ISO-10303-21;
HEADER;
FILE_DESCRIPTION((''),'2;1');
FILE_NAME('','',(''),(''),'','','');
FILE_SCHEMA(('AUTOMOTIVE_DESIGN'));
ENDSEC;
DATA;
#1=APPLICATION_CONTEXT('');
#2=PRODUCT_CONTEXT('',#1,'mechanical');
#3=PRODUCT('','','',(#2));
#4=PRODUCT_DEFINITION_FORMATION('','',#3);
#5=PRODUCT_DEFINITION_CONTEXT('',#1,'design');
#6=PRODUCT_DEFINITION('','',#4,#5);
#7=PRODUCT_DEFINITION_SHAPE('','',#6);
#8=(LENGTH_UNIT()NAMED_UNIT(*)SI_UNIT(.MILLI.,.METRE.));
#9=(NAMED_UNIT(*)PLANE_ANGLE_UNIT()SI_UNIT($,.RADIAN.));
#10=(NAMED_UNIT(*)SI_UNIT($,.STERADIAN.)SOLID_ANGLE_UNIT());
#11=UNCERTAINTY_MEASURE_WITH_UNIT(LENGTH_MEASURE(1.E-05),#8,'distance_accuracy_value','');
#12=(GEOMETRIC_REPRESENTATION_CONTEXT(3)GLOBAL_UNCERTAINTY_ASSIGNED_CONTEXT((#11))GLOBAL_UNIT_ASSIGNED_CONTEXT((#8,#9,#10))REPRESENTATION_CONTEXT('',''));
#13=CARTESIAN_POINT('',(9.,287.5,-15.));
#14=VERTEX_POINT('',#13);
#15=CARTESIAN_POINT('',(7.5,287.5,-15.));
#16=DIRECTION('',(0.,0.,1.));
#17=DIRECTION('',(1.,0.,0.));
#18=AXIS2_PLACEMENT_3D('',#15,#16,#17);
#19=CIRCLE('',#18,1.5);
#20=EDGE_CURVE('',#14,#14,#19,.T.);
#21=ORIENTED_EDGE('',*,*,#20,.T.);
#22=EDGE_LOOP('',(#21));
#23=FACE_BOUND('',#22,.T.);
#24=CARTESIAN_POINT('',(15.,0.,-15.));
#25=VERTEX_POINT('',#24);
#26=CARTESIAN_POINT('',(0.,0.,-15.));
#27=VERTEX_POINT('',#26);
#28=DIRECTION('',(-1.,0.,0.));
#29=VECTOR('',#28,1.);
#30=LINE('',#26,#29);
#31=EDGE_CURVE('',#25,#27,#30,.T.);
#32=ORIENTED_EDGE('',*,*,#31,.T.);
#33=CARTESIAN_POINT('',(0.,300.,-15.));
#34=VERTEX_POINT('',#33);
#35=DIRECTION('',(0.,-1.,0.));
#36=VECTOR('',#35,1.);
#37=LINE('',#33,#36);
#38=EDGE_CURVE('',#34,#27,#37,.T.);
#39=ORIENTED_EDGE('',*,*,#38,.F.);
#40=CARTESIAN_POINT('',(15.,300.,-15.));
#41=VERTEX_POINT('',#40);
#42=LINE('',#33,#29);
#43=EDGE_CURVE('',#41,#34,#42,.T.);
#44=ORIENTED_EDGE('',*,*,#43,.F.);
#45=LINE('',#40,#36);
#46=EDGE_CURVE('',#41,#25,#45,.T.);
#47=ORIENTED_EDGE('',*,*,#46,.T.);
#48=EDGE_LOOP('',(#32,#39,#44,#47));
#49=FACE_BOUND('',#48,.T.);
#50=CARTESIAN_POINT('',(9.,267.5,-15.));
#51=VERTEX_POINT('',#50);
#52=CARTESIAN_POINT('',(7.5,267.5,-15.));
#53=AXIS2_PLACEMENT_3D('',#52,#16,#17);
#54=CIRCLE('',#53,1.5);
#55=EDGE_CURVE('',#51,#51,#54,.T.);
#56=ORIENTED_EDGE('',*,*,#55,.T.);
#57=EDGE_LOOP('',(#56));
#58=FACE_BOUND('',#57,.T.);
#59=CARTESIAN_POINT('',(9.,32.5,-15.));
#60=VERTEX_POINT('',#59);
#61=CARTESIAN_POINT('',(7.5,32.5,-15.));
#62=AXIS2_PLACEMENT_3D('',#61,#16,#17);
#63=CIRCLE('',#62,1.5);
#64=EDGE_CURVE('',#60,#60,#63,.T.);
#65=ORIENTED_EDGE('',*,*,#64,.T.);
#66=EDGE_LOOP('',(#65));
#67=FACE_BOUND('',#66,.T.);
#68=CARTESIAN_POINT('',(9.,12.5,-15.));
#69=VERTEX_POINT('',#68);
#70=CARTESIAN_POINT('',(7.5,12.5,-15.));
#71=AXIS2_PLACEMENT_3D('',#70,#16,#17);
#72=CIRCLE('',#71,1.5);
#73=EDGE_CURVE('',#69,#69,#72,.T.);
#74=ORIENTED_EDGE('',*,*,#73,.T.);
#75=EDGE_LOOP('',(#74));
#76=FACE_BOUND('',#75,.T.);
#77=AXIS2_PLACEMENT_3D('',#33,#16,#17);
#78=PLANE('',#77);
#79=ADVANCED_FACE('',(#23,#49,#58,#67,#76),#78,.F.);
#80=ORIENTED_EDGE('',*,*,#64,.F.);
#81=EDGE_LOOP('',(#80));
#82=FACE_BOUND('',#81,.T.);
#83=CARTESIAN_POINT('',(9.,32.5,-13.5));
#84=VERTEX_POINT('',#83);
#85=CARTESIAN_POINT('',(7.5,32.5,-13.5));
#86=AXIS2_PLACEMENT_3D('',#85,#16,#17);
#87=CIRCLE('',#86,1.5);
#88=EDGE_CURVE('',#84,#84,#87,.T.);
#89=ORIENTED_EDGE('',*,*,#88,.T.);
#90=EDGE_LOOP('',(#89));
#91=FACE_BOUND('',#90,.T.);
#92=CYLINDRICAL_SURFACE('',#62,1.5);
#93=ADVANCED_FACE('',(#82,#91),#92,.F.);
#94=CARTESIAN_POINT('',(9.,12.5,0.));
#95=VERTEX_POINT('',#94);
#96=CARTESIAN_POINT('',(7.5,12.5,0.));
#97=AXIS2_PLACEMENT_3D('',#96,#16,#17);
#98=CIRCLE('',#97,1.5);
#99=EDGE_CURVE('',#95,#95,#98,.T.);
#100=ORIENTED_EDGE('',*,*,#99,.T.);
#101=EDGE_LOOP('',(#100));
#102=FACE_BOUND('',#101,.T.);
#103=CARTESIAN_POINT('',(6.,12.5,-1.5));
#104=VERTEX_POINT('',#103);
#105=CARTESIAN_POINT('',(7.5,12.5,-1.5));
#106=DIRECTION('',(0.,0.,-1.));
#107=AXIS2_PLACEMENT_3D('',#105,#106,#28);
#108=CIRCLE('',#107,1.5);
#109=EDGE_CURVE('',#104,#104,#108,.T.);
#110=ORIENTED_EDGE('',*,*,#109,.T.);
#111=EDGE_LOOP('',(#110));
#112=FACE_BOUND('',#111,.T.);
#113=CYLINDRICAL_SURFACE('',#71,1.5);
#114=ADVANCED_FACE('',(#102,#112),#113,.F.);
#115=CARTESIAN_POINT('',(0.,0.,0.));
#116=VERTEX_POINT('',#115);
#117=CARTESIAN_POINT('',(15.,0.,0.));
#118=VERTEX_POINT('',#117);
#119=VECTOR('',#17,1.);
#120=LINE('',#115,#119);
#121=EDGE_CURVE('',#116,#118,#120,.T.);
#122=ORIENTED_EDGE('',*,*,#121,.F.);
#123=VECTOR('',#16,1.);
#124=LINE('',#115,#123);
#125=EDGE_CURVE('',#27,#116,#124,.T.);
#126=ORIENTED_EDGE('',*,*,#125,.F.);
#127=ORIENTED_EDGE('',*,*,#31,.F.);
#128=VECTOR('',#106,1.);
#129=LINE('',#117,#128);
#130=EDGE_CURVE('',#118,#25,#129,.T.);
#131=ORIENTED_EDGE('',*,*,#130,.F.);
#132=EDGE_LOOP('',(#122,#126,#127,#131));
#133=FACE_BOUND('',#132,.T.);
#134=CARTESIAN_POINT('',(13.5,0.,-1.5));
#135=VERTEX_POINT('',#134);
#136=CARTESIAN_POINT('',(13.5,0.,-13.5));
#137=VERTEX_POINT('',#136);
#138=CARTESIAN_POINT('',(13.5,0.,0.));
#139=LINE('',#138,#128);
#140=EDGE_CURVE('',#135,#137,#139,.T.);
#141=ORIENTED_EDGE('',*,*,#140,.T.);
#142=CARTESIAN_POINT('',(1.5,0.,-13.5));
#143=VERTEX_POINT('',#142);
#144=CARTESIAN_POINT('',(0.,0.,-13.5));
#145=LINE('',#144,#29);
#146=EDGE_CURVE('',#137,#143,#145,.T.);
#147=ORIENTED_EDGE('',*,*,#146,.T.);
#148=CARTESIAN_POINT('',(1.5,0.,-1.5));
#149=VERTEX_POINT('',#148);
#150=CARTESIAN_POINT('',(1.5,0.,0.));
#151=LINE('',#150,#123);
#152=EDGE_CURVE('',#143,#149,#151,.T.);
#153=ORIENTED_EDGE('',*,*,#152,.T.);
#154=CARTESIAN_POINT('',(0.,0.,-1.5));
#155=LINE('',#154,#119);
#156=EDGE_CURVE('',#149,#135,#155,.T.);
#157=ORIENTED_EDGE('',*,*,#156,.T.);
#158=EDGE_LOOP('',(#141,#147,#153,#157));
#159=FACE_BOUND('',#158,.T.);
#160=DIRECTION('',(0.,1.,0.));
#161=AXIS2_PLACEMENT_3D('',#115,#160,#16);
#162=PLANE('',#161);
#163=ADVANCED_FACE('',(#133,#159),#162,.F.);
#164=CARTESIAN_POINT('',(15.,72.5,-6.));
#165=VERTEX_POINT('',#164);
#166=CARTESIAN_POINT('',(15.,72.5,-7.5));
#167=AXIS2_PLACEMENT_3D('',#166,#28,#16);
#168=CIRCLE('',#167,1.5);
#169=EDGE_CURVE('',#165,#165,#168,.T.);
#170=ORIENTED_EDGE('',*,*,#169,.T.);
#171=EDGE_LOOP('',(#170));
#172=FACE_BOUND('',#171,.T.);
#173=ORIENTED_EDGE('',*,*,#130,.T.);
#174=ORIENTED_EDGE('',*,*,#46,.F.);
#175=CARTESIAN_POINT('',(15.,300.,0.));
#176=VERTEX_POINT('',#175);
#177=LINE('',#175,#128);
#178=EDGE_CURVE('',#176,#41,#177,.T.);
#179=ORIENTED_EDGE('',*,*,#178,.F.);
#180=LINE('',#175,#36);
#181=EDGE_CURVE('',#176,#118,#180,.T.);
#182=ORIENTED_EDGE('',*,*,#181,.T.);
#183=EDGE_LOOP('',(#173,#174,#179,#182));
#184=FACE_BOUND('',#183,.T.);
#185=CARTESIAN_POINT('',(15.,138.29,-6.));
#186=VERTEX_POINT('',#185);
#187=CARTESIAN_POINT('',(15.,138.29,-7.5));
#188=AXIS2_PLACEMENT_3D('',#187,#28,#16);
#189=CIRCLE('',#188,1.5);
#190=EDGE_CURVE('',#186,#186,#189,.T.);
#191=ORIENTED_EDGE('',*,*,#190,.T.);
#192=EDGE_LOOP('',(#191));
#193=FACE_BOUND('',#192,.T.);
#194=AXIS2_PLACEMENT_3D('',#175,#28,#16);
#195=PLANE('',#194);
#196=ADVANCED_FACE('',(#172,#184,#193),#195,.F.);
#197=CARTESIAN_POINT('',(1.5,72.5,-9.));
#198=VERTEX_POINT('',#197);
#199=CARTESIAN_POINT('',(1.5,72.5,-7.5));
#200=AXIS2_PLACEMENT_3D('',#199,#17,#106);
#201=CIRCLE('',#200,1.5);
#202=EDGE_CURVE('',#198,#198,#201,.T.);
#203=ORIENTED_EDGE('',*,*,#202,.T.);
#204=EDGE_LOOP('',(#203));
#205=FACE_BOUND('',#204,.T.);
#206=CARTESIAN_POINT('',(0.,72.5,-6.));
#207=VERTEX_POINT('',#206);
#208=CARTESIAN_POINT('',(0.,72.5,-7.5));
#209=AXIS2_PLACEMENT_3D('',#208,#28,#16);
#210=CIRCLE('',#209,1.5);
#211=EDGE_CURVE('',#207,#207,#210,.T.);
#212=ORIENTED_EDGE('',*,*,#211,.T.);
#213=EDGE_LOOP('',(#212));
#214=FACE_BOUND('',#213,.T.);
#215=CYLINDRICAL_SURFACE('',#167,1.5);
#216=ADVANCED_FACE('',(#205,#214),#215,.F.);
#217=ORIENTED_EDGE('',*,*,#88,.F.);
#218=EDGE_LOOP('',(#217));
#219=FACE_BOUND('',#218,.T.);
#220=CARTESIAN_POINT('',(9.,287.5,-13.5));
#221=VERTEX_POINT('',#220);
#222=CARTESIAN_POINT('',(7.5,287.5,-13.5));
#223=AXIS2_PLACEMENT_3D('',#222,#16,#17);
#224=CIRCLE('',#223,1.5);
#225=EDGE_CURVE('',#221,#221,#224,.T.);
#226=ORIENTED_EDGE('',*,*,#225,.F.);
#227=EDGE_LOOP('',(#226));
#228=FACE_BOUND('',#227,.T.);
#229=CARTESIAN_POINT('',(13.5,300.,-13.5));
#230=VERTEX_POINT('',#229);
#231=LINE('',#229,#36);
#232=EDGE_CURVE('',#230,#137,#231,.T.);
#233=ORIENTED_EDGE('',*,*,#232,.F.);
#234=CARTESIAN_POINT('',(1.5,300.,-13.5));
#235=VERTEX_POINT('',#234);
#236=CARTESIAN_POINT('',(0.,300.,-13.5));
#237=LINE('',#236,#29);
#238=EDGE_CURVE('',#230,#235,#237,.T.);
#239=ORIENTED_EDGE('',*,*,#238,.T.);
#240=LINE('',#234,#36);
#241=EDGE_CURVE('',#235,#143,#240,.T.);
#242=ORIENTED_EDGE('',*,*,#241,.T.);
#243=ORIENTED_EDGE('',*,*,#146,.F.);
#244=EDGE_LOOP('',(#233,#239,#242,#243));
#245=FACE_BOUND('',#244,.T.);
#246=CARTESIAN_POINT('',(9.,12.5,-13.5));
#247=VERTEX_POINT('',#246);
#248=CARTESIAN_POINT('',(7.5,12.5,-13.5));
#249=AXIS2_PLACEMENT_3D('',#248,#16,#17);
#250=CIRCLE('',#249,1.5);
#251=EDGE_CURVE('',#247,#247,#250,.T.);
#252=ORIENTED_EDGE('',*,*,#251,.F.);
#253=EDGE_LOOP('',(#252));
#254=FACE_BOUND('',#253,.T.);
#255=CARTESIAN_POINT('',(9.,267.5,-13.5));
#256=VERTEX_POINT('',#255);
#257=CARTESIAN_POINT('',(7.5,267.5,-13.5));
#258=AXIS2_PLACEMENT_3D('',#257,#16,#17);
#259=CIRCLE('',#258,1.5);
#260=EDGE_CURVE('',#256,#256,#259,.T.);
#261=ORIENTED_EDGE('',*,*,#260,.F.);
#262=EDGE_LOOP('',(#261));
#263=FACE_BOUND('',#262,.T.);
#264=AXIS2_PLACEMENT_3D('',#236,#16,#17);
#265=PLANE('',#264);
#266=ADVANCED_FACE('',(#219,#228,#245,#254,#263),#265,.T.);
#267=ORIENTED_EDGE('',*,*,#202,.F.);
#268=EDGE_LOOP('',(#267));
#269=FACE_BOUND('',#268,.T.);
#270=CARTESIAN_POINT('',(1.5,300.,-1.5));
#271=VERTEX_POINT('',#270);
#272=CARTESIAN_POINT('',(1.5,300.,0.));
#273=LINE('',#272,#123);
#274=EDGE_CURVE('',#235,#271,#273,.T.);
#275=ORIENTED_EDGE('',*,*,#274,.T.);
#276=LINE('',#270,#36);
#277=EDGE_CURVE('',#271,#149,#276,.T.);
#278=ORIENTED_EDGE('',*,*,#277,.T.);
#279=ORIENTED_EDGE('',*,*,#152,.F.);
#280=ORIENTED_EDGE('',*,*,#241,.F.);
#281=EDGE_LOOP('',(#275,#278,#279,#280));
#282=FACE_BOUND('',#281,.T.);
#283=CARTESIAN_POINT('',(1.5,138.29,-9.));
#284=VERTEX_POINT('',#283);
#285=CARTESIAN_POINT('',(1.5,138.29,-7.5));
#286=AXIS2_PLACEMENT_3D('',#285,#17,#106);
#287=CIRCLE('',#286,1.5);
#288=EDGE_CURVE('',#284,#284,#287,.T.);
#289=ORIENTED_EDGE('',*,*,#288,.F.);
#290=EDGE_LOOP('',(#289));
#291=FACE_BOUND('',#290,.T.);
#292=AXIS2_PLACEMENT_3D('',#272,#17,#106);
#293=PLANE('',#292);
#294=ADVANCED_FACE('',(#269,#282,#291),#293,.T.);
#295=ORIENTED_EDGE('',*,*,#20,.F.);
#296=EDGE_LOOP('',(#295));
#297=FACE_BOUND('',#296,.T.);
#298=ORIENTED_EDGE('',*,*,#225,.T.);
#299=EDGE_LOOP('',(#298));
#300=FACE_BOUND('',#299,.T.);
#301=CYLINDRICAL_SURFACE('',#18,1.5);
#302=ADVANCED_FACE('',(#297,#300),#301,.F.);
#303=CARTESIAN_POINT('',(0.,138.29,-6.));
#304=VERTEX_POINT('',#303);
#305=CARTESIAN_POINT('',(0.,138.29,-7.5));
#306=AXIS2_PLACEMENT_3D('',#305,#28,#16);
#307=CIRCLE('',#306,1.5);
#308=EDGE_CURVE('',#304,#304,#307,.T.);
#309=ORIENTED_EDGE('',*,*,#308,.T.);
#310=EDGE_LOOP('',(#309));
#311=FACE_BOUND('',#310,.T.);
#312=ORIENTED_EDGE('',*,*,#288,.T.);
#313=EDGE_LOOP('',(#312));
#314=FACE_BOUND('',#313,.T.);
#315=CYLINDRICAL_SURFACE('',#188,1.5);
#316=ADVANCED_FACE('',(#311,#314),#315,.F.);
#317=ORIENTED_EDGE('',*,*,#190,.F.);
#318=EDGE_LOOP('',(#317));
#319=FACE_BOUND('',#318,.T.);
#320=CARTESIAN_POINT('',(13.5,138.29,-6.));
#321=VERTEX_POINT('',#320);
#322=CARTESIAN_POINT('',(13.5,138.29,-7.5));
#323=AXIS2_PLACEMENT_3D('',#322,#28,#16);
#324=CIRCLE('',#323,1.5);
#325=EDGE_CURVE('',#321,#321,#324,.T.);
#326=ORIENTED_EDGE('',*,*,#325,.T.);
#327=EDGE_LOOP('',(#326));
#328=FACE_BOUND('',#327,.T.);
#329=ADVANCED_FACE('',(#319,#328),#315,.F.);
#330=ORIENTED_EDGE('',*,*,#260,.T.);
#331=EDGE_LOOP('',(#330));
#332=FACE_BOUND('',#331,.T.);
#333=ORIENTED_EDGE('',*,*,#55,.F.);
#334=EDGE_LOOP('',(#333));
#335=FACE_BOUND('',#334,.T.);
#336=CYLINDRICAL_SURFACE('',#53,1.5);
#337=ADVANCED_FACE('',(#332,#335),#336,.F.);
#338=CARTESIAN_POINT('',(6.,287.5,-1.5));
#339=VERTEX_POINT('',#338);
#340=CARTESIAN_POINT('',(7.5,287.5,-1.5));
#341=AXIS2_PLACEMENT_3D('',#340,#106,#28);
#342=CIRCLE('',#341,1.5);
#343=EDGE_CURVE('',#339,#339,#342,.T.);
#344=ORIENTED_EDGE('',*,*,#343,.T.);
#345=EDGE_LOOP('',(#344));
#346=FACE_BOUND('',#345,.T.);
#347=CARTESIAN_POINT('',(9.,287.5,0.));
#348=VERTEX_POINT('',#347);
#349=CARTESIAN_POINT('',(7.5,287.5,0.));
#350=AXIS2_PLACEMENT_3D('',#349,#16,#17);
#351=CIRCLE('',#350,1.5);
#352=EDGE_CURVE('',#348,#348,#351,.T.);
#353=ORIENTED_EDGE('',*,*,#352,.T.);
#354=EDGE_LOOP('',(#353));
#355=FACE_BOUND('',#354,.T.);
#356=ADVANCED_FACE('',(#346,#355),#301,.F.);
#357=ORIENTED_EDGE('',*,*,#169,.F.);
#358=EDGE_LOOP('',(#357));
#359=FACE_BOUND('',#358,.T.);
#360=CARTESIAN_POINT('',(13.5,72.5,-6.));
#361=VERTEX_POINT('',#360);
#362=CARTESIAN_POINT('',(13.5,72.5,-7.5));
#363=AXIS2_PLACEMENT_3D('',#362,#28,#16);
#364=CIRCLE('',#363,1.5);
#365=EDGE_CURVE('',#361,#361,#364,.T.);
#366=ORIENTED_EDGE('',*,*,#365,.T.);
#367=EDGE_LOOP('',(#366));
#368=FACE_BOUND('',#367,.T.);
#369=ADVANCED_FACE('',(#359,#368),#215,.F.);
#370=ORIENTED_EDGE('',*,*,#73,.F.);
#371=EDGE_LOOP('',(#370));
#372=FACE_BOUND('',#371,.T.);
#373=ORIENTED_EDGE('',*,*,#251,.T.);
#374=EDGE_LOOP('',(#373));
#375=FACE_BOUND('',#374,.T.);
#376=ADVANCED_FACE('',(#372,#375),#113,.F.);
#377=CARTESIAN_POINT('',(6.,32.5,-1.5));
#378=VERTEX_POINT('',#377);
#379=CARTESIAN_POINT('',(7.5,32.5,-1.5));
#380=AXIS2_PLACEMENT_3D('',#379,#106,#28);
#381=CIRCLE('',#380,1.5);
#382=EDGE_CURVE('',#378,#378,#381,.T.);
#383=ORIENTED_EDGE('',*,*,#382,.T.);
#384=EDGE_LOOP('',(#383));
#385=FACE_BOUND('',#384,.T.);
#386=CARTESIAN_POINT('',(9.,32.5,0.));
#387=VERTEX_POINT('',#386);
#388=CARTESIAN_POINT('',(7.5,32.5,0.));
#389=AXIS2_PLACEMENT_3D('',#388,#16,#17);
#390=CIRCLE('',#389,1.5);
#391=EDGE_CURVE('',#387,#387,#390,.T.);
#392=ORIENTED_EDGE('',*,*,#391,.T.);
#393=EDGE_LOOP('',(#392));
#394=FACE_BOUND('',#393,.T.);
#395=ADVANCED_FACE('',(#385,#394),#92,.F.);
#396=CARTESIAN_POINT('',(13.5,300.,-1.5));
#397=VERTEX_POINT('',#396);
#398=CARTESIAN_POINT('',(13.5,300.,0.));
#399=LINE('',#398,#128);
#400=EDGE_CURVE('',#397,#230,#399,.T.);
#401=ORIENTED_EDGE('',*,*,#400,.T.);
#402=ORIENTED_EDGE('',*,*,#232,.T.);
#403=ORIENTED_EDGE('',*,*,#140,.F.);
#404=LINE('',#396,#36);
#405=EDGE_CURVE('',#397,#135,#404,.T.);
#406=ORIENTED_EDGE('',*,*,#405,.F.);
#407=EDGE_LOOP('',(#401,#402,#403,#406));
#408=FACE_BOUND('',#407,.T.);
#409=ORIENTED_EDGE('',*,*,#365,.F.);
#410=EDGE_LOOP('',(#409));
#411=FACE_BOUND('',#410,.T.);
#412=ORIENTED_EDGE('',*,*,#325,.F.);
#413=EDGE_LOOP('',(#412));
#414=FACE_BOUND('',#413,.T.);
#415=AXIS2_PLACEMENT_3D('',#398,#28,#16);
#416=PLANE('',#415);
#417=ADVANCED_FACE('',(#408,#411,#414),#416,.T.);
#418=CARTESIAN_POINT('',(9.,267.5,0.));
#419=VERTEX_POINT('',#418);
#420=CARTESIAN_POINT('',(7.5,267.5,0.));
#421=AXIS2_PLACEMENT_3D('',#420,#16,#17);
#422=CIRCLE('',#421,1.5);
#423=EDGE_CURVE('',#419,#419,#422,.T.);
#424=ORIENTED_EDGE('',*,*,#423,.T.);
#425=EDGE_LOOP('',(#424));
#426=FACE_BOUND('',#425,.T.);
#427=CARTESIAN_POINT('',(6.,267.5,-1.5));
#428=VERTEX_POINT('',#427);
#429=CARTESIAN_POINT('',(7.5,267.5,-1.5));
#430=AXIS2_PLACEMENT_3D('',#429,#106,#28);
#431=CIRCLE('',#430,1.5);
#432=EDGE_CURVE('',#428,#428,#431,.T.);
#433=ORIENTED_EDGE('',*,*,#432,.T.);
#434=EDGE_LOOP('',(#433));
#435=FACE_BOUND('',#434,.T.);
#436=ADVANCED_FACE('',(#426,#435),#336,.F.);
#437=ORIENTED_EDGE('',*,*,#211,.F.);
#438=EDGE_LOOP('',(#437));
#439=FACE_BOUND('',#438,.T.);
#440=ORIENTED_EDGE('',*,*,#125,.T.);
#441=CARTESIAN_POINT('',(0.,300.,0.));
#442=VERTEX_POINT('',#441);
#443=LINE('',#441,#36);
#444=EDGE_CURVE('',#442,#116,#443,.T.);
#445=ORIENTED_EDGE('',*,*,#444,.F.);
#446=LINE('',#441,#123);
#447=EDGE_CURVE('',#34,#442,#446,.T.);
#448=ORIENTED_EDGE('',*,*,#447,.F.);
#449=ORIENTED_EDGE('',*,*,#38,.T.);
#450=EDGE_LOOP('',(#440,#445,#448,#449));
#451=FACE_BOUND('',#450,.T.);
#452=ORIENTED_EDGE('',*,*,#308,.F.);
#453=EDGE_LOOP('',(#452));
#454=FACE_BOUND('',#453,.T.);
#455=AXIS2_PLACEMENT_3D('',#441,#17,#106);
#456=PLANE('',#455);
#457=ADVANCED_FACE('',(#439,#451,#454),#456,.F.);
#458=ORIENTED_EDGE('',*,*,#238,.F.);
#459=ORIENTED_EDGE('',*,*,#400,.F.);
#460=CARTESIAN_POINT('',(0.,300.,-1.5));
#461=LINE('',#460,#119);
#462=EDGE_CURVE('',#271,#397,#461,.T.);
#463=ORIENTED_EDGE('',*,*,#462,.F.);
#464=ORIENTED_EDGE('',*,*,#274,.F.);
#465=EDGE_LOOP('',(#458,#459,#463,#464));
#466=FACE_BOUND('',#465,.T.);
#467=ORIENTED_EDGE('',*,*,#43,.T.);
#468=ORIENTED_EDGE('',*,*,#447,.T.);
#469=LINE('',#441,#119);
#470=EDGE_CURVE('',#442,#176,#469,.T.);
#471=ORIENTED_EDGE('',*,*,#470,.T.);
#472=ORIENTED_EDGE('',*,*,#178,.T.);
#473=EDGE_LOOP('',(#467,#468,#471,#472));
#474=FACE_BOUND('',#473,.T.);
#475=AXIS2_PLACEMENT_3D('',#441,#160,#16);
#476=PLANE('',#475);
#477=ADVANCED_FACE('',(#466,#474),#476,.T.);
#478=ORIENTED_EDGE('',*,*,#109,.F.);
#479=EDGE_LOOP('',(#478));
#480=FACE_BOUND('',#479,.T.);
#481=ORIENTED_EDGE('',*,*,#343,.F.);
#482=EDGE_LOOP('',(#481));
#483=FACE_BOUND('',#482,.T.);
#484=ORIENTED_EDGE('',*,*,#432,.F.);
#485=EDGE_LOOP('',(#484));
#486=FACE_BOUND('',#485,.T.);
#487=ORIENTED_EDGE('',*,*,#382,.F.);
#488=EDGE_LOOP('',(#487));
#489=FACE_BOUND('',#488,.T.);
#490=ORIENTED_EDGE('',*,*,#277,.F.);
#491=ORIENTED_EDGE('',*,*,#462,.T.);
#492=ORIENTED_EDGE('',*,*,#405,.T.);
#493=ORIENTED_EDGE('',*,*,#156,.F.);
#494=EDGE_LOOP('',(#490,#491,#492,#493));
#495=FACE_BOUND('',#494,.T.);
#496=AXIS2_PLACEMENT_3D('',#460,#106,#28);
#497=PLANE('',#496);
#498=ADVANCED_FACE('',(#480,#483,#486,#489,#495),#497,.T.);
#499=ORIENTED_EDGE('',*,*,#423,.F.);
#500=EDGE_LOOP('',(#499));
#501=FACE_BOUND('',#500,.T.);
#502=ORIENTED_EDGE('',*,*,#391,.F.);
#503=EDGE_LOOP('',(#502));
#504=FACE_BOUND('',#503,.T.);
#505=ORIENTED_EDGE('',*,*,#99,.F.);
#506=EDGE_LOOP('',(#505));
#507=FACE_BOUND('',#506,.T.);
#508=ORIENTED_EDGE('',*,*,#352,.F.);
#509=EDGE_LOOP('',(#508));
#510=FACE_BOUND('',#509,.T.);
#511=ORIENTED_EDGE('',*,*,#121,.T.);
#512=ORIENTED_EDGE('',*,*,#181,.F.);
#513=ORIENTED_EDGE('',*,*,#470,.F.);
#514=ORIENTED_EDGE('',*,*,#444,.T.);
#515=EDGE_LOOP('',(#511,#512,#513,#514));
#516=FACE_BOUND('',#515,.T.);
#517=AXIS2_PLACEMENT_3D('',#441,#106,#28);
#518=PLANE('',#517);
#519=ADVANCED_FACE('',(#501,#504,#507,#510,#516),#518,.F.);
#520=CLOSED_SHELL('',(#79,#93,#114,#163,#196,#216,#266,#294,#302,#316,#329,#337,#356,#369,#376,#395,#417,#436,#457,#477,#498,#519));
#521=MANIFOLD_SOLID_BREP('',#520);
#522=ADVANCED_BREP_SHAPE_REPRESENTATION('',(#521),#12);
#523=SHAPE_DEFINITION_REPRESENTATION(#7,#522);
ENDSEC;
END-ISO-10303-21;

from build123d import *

# Parameters (mm, degrees)
SKETCH1_W              = 15
SKETCH1_H              = 15
SKETCH1_W_2            = 12
SKETCH1_H_2            = 12
EXTRUDE_THIN1_DEPTH    = 300
SKETCH2_R              = 1.5
CUT_EXTRUDE1_DEPTH     = 301.749064836
CUT_EXTRUDE2_OUTLINE_R = 1.5
CUT_EXTRUDE2_DEPTH     = 15


# Read off the part's stored shape, not the designer's step: Cut-Extrude2
with BuildPart() as part:
    # Sketch1 → Extrude-Thin1 (new body)
    with BuildSketch(Plane(origin=(0, 0, 0), x_dir=(1, 0, 0), z_dir=(0, 1, 0))):
        with Locations((7.5, 7.5)):
            Rectangle(SKETCH1_W, SKETCH1_H)
        with Locations((7.5, 7.5)):
            Rectangle(SKETCH1_W_2, SKETCH1_H_2, mode=Mode.SUBTRACT)
    extrude(amount=EXTRUDE_THIN1_DEPTH)

    # Sketch2 (on Front Plane) → Cut-Extrude1 (cut, through all)
    with BuildSketch(Plane.XY):
        with Locations((7.5, 12.5)):
            Circle(SKETCH2_R)
        with Locations((7.5, 32.5)):
            Circle(SKETCH2_R)
        with Locations((7.5, 267.5)):
            Circle(SKETCH2_R)
        with Locations((7.5, 287.5)):
            Circle(SKETCH2_R)
    extrude(amount=-CUT_EXTRUDE1_DEPTH, mode=Mode.SUBTRACT)

    # Cut-Extrude2 outline → Cut-Extrude2 (cut)
    with BuildSketch(Plane.YZ):
        with Locations((138.290000004, -7.5)):
            Circle(CUT_EXTRUDE2_OUTLINE_R)
        with Locations((72.500000004, -7.5)):
            Circle(CUT_EXTRUDE2_OUTLINE_R)
    extrude(amount=CUT_EXTRUDE2_DEPTH, mode=Mode.SUBTRACT)


solid = part.part
